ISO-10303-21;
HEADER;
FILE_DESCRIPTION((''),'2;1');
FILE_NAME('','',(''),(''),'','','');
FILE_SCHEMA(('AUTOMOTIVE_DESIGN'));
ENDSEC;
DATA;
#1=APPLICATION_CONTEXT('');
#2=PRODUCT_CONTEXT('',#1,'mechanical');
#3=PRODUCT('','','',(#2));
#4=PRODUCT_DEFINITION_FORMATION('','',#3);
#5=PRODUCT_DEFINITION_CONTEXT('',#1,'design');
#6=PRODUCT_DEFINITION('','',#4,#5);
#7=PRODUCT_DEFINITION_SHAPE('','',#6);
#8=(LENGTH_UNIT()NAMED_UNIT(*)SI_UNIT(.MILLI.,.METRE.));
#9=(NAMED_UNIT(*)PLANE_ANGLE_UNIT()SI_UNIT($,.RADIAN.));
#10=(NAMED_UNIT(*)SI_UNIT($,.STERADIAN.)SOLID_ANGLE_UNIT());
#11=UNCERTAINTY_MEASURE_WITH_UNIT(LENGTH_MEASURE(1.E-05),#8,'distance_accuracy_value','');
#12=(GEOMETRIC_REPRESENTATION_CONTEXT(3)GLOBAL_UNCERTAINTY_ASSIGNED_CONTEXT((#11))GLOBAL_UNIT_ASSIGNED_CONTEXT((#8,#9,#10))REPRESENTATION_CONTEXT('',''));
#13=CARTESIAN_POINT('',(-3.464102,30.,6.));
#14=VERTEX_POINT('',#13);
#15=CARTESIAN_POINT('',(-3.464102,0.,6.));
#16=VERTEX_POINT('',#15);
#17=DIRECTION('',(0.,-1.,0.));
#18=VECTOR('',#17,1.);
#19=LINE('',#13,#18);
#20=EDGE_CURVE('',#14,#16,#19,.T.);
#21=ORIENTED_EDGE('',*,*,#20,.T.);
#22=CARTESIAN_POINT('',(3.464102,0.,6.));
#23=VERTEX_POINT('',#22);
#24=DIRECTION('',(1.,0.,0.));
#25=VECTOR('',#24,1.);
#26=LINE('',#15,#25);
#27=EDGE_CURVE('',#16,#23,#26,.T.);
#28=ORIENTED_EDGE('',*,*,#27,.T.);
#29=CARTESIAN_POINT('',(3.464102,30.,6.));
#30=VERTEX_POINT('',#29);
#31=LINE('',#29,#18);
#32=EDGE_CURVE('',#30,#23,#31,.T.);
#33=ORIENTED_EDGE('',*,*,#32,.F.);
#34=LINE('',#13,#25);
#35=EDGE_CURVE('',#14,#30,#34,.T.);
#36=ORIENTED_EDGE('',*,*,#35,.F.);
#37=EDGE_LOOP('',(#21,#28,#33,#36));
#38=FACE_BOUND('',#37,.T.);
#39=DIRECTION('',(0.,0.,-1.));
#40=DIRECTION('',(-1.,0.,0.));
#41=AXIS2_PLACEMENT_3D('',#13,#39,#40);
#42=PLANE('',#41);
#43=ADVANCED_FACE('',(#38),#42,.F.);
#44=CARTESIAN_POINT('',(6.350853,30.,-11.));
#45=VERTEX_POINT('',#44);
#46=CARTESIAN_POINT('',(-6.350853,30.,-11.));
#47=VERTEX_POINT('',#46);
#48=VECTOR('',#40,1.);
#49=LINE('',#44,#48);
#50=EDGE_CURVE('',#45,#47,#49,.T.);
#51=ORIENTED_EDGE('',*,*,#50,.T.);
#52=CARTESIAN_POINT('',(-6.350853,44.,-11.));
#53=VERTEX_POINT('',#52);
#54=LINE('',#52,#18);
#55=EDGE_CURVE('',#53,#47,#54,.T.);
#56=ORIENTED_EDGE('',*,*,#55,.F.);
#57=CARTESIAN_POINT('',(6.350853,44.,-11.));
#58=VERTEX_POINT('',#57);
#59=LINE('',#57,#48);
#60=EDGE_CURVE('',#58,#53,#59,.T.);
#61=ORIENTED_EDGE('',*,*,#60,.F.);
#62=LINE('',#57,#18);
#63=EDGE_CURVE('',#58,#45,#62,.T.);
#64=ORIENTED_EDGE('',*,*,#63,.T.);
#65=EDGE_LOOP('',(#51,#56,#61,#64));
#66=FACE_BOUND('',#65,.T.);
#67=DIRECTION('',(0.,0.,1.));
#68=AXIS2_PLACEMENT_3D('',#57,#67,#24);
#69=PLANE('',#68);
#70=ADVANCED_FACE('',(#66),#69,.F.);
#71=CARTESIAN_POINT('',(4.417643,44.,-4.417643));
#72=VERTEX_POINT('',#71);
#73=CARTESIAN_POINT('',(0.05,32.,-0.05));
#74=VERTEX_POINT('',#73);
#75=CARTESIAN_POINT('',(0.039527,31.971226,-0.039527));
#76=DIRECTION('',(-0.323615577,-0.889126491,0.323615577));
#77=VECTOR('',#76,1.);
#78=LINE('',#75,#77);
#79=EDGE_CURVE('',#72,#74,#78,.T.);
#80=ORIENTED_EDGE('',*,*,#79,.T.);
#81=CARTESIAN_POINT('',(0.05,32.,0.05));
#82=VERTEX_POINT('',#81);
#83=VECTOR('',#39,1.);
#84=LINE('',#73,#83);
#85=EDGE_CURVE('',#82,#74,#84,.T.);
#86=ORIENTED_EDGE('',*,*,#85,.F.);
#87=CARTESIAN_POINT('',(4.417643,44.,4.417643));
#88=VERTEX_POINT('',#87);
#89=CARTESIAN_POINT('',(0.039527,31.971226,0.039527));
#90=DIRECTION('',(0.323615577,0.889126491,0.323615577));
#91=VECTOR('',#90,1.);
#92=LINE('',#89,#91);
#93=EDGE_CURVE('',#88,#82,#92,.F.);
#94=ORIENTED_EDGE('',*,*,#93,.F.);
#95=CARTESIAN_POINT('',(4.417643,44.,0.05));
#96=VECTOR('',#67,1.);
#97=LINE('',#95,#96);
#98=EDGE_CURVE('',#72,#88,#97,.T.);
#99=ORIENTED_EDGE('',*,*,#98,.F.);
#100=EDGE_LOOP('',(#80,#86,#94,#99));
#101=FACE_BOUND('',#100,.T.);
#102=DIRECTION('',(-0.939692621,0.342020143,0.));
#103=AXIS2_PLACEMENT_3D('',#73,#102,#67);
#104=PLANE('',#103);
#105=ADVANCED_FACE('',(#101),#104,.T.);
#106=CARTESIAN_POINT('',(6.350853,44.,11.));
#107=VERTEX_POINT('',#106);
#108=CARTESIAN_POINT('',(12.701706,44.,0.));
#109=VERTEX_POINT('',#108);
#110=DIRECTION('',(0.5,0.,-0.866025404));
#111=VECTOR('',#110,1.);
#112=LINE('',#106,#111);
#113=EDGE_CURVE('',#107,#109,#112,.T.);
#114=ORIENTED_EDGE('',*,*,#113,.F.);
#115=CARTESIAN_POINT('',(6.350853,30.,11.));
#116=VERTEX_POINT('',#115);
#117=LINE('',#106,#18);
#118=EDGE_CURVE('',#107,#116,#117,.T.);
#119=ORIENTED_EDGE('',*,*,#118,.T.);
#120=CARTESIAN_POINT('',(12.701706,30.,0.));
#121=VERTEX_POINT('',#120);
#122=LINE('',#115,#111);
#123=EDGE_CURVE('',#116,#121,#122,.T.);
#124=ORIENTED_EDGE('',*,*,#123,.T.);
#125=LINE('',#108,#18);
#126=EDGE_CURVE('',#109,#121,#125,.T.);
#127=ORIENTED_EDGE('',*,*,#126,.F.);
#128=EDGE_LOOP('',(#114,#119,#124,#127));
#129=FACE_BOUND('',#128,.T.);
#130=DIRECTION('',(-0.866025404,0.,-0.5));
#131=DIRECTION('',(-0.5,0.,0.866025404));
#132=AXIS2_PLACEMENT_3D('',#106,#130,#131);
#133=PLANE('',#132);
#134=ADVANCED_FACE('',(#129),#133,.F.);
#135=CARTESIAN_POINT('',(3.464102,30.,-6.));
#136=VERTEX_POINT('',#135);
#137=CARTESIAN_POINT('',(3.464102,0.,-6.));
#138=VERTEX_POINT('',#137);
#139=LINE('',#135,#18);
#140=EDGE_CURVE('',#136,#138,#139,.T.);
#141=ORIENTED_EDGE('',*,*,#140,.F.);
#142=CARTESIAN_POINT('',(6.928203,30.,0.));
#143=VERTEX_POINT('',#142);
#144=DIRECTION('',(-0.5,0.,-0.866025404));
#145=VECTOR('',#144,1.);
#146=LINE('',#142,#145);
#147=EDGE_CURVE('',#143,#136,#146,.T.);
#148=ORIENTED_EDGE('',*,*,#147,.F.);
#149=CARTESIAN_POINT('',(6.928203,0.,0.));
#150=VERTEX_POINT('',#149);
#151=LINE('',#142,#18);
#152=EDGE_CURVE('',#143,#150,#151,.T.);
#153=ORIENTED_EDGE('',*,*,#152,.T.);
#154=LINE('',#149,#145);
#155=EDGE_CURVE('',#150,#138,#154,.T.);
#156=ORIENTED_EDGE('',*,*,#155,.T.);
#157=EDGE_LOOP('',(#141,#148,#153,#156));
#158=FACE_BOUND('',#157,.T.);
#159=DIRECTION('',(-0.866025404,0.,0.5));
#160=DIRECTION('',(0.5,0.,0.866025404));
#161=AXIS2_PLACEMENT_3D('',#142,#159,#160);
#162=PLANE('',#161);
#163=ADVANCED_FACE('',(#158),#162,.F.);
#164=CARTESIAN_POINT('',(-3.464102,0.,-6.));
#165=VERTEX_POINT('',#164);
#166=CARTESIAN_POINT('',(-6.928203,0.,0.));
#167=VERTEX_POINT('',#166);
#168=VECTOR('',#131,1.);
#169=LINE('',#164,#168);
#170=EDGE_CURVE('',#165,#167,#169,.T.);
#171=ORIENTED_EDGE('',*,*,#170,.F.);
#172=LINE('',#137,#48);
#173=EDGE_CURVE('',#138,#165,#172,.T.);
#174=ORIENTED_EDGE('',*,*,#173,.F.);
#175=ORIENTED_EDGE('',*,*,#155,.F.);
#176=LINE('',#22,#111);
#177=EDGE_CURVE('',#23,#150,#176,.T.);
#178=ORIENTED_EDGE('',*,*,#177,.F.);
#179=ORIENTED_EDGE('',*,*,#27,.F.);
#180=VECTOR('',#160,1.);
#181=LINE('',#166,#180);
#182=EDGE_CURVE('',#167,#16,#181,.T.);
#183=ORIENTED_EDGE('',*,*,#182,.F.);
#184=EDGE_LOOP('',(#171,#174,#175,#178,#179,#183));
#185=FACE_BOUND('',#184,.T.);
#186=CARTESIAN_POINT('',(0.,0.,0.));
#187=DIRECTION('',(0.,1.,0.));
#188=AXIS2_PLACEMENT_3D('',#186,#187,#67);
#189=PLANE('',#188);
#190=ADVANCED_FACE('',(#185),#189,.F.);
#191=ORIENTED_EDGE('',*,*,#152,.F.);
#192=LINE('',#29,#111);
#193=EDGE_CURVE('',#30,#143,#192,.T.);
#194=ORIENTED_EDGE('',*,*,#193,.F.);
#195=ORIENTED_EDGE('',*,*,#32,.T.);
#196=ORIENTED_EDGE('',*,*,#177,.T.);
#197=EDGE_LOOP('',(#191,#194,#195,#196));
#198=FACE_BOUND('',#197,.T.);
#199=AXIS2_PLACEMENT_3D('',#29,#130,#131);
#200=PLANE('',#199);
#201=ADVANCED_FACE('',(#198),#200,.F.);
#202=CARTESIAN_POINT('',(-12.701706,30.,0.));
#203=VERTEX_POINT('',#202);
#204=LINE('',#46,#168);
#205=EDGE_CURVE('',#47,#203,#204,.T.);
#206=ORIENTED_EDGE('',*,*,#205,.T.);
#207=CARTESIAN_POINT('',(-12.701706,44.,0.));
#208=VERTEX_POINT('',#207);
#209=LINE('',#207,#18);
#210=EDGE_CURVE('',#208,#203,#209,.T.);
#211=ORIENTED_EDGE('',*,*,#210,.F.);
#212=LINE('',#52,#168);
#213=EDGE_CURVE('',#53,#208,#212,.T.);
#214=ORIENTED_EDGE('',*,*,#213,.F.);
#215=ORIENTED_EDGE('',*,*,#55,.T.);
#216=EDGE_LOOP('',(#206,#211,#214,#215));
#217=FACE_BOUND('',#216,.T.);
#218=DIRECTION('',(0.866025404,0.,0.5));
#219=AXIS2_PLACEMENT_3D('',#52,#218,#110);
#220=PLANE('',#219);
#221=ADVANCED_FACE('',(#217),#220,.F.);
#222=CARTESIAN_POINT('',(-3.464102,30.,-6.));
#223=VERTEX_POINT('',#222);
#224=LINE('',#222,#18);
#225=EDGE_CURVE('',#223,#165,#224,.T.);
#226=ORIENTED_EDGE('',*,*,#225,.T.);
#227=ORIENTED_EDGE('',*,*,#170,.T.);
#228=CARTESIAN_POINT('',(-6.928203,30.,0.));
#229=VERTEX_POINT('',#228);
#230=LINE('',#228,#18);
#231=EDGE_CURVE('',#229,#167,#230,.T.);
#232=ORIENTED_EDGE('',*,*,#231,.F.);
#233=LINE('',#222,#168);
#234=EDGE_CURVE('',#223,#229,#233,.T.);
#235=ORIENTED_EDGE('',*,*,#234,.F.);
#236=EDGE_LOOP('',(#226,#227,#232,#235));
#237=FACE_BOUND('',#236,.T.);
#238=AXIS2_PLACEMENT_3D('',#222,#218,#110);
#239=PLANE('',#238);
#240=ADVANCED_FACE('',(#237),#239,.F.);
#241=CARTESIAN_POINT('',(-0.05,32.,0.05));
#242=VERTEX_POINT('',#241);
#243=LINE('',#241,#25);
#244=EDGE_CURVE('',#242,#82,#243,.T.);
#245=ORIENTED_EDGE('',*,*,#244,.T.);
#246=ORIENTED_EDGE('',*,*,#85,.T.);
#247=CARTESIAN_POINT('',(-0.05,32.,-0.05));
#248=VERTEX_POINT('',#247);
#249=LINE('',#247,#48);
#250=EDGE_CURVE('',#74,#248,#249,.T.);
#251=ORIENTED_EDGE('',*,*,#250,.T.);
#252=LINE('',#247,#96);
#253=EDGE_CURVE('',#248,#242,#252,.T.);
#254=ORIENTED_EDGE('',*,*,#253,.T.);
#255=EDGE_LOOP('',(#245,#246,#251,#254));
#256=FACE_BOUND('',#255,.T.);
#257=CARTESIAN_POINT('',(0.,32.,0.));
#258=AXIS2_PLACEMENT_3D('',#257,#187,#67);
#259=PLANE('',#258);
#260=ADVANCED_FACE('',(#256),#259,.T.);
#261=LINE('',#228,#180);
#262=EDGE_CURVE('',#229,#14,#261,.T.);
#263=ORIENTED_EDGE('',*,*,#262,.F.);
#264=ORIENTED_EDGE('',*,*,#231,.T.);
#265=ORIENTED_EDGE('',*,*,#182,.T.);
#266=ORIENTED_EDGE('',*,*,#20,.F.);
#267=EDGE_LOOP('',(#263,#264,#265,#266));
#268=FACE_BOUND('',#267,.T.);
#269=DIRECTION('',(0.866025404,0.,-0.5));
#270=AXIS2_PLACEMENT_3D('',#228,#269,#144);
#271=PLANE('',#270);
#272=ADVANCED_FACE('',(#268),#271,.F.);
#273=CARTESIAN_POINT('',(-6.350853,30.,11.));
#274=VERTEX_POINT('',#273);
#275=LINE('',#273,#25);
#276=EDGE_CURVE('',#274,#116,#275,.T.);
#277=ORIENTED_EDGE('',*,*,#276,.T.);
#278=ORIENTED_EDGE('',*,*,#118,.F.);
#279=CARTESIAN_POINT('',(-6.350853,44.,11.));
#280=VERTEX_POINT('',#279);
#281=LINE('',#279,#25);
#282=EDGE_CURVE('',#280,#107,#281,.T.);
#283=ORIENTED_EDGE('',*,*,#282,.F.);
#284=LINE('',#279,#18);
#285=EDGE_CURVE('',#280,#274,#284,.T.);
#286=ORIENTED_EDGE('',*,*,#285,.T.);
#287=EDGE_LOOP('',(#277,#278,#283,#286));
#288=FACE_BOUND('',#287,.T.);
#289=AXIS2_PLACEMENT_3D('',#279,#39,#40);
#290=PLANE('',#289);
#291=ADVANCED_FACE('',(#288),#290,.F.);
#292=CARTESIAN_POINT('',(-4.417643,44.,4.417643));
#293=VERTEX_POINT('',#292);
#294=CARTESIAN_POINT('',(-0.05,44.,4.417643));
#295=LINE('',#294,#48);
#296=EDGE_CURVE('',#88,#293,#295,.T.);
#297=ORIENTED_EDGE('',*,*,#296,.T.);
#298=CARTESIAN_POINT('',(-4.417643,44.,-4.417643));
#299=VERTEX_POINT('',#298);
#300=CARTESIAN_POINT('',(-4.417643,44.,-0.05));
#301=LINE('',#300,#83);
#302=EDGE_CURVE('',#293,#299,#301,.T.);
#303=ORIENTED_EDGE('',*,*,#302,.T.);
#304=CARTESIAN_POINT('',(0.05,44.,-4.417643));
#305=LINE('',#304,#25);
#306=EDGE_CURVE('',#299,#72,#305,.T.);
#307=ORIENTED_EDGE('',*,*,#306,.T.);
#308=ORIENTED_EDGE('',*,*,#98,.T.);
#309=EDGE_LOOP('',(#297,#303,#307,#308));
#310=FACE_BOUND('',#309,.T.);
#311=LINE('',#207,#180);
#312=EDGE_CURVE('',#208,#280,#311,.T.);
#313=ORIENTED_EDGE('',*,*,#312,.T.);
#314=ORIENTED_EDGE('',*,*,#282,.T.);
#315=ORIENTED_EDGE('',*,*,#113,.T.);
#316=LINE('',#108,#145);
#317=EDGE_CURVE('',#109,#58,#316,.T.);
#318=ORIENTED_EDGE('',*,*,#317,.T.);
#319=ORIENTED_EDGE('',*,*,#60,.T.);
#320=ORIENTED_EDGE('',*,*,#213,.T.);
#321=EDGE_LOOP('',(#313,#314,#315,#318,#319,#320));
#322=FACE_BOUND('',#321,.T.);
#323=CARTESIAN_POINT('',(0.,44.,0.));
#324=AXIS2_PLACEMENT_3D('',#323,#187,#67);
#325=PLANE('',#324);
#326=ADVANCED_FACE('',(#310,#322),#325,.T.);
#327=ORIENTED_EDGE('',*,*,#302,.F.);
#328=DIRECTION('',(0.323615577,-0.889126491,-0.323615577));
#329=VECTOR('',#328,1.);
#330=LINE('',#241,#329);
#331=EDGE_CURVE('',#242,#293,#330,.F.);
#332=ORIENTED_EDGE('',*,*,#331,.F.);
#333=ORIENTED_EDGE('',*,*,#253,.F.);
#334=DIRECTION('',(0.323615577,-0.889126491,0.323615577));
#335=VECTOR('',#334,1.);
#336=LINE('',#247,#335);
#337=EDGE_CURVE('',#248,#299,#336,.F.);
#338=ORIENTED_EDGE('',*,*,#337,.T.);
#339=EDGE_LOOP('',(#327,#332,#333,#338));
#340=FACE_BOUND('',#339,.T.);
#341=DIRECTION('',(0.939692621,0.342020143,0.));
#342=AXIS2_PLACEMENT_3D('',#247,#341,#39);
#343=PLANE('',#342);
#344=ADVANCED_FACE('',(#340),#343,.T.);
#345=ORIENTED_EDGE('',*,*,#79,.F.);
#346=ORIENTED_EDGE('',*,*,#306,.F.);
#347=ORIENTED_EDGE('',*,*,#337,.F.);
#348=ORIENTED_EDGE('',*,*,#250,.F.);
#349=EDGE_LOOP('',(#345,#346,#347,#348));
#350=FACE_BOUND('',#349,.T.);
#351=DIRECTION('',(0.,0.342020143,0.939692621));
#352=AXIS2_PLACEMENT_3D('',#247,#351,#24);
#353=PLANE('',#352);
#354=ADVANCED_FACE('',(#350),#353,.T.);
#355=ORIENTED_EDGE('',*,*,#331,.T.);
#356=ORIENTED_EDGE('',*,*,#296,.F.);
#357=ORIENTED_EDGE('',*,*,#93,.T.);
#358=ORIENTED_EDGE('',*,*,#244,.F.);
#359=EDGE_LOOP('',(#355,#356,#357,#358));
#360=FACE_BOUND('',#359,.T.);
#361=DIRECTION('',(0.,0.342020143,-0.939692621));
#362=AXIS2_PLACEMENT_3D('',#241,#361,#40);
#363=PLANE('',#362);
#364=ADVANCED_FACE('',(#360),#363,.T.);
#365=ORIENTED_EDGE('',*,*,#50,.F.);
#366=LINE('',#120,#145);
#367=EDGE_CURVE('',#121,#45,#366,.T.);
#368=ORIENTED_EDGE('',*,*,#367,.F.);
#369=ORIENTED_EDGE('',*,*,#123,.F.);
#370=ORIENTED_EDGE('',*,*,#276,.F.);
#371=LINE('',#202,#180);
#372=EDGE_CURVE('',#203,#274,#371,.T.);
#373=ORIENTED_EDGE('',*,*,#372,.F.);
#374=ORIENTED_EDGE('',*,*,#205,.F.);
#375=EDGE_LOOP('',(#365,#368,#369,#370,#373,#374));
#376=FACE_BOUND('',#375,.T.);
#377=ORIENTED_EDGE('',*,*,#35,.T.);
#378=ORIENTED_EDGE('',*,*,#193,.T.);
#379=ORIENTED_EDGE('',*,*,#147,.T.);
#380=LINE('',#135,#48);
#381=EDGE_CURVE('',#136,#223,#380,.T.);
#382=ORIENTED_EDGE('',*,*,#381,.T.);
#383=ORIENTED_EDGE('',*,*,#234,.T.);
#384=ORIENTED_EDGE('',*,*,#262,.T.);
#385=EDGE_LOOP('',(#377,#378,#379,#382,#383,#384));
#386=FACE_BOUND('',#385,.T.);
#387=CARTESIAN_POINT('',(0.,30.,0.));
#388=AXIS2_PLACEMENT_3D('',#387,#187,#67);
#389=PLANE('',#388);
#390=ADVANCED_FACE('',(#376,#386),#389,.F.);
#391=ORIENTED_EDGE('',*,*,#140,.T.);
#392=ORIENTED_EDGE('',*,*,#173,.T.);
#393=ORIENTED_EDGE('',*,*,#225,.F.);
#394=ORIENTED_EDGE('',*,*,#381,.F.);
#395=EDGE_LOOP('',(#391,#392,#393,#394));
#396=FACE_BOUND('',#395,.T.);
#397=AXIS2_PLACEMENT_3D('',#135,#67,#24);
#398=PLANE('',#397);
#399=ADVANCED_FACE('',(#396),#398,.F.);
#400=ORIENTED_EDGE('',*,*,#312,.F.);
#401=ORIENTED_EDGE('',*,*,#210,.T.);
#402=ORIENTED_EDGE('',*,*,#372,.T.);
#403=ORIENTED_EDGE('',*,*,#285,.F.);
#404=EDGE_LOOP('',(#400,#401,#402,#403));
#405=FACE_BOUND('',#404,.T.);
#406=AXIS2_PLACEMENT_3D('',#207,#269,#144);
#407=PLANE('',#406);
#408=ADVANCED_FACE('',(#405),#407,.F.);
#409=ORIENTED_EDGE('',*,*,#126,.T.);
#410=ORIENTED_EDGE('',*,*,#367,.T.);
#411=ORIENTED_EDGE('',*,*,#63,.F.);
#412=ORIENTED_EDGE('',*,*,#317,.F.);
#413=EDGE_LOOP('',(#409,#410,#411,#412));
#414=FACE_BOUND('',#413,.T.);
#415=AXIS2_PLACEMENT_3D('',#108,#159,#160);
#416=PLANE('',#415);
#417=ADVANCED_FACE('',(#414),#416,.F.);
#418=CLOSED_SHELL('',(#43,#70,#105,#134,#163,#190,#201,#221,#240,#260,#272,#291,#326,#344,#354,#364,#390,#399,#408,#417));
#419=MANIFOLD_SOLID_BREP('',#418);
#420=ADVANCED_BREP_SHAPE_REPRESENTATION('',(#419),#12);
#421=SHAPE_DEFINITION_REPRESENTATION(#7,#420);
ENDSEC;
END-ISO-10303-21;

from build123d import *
from OCP.BRepFilletAPI import BRepFilletAPI_MakeChamfer

# Parameters (mm, degrees)
EXTRUDE_1_DEPTH     = 30
EXTRUDE_2_DEPTH     = 14
SKETCH_3_W          = 0.1
SKETCH_3_H          = 0.1
CUT_EXTRUDE_1_DEPTH = 12
CHAMFER_1_SIZE      = 4.367642811
CHAMFER_1_SIZE_2    = 12


with BuildPart() as part:
    # ｽｹｯﾁ1 → ﾎﾞｽ - 押し出し1 (new body)
    with BuildSketch(Plane(origin=(0, 0, 0), x_dir=(1, 0, 0), z_dir=(0, 1, 0))):
        Polygon((3.464101615, -6), (6.92820323, 0), (3.464101615, 6), (-3.464101615, 6), (-6.92820323, 0), (-3.464101615, -6), align=None)
    extrude(amount=EXTRUDE_1_DEPTH)

    # ｽｹｯﾁ2 → ﾎﾞｽ - 押し出し2 (add)
    with BuildSketch(Plane(origin=(0, 30, 0), x_dir=(1, 0, 0), z_dir=(0, 1, 0))):
        Polygon((6.350852961, -11), (12.701705922, 0), (6.350852961, 11), (-6.350852961, 11), (-12.701705922, 0), (-6.350852961, -11), align=None)
    extrude(amount=EXTRUDE_2_DEPTH)

    # ｽｹｯﾁ3 → ｶｯﾄ - 押し出し1 (cut)
    with BuildSketch(Plane(origin=(0, 44, 0), x_dir=(1, 0, 0), z_dir=(0, 1, 0))):
        Rectangle(SKETCH_3_W, SKETCH_3_H)
    extrude(amount=-CUT_EXTRUDE_1_DEPTH, mode=Mode.SUBTRACT)

    # 面取り1
    chamfer_1_edges_1 = [part.edges().sort_by_distance(p)[0] for p in [
        (0, 44, 0.05),
    ]]
    chamfer_1_side_1 = [part.faces().sort_by_distance(p)[0] for p in [
        (0, 44, 0.137352856),
    ]]
    chamfer_1_edges_2 = [part.edges().sort_by_distance(p)[0] for p in [
        (-0.05, 44, 0),
    ]]
    chamfer_1_side_2 = [part.faces().sort_by_distance(p)[0] for p in [
        (-0.137352856, 44, 0),
    ]]
    chamfer_1_edges_3 = [part.edges().sort_by_distance(p)[0] for p in [
        (0, 44, -0.05),
    ]]
    chamfer_1_side_3 = [part.faces().sort_by_distance(p)[0] for p in [
        (0, 44, -0.137352856),
    ]]
    chamfer_1_edges_4 = [part.edges().sort_by_distance(p)[0] for p in [
        (0.05, 44, 0),
    ]]
    chamfer_1_side_4 = [part.faces().sort_by_distance(p)[0] for p in [
        (0.137352856, 44, 0),
    ]]
    chamfer_1 = BRepFilletAPI_MakeChamfer(part.part.solid().wrapped)
    for e in chamfer_1_edges_1:
        chamfer_1.Add(CHAMFER_1_SIZE - 0.0001, CHAMFER_1_SIZE_2 - 0.0001, e.wrapped, chamfer_1_side_1[0].wrapped)
    for e in chamfer_1_edges_2:
        chamfer_1.Add(CHAMFER_1_SIZE - 0.0001, CHAMFER_1_SIZE_2 - 0.0001, e.wrapped, chamfer_1_side_2[0].wrapped)
    for e in chamfer_1_edges_3:
        chamfer_1.Add(CHAMFER_1_SIZE - 0.0001, CHAMFER_1_SIZE_2 - 0.0001, e.wrapped, chamfer_1_side_3[0].wrapped)
    for e in chamfer_1_edges_4:
        chamfer_1.Add(CHAMFER_1_SIZE - 0.0001, CHAMFER_1_SIZE_2 - 0.0001, e.wrapped, chamfer_1_side_4[0].wrapped)
    add(Compound.cast(chamfer_1.Shape()), mode=Mode.REPLACE)  # a hair under: the kernel refuses the full size


solid = part.part
